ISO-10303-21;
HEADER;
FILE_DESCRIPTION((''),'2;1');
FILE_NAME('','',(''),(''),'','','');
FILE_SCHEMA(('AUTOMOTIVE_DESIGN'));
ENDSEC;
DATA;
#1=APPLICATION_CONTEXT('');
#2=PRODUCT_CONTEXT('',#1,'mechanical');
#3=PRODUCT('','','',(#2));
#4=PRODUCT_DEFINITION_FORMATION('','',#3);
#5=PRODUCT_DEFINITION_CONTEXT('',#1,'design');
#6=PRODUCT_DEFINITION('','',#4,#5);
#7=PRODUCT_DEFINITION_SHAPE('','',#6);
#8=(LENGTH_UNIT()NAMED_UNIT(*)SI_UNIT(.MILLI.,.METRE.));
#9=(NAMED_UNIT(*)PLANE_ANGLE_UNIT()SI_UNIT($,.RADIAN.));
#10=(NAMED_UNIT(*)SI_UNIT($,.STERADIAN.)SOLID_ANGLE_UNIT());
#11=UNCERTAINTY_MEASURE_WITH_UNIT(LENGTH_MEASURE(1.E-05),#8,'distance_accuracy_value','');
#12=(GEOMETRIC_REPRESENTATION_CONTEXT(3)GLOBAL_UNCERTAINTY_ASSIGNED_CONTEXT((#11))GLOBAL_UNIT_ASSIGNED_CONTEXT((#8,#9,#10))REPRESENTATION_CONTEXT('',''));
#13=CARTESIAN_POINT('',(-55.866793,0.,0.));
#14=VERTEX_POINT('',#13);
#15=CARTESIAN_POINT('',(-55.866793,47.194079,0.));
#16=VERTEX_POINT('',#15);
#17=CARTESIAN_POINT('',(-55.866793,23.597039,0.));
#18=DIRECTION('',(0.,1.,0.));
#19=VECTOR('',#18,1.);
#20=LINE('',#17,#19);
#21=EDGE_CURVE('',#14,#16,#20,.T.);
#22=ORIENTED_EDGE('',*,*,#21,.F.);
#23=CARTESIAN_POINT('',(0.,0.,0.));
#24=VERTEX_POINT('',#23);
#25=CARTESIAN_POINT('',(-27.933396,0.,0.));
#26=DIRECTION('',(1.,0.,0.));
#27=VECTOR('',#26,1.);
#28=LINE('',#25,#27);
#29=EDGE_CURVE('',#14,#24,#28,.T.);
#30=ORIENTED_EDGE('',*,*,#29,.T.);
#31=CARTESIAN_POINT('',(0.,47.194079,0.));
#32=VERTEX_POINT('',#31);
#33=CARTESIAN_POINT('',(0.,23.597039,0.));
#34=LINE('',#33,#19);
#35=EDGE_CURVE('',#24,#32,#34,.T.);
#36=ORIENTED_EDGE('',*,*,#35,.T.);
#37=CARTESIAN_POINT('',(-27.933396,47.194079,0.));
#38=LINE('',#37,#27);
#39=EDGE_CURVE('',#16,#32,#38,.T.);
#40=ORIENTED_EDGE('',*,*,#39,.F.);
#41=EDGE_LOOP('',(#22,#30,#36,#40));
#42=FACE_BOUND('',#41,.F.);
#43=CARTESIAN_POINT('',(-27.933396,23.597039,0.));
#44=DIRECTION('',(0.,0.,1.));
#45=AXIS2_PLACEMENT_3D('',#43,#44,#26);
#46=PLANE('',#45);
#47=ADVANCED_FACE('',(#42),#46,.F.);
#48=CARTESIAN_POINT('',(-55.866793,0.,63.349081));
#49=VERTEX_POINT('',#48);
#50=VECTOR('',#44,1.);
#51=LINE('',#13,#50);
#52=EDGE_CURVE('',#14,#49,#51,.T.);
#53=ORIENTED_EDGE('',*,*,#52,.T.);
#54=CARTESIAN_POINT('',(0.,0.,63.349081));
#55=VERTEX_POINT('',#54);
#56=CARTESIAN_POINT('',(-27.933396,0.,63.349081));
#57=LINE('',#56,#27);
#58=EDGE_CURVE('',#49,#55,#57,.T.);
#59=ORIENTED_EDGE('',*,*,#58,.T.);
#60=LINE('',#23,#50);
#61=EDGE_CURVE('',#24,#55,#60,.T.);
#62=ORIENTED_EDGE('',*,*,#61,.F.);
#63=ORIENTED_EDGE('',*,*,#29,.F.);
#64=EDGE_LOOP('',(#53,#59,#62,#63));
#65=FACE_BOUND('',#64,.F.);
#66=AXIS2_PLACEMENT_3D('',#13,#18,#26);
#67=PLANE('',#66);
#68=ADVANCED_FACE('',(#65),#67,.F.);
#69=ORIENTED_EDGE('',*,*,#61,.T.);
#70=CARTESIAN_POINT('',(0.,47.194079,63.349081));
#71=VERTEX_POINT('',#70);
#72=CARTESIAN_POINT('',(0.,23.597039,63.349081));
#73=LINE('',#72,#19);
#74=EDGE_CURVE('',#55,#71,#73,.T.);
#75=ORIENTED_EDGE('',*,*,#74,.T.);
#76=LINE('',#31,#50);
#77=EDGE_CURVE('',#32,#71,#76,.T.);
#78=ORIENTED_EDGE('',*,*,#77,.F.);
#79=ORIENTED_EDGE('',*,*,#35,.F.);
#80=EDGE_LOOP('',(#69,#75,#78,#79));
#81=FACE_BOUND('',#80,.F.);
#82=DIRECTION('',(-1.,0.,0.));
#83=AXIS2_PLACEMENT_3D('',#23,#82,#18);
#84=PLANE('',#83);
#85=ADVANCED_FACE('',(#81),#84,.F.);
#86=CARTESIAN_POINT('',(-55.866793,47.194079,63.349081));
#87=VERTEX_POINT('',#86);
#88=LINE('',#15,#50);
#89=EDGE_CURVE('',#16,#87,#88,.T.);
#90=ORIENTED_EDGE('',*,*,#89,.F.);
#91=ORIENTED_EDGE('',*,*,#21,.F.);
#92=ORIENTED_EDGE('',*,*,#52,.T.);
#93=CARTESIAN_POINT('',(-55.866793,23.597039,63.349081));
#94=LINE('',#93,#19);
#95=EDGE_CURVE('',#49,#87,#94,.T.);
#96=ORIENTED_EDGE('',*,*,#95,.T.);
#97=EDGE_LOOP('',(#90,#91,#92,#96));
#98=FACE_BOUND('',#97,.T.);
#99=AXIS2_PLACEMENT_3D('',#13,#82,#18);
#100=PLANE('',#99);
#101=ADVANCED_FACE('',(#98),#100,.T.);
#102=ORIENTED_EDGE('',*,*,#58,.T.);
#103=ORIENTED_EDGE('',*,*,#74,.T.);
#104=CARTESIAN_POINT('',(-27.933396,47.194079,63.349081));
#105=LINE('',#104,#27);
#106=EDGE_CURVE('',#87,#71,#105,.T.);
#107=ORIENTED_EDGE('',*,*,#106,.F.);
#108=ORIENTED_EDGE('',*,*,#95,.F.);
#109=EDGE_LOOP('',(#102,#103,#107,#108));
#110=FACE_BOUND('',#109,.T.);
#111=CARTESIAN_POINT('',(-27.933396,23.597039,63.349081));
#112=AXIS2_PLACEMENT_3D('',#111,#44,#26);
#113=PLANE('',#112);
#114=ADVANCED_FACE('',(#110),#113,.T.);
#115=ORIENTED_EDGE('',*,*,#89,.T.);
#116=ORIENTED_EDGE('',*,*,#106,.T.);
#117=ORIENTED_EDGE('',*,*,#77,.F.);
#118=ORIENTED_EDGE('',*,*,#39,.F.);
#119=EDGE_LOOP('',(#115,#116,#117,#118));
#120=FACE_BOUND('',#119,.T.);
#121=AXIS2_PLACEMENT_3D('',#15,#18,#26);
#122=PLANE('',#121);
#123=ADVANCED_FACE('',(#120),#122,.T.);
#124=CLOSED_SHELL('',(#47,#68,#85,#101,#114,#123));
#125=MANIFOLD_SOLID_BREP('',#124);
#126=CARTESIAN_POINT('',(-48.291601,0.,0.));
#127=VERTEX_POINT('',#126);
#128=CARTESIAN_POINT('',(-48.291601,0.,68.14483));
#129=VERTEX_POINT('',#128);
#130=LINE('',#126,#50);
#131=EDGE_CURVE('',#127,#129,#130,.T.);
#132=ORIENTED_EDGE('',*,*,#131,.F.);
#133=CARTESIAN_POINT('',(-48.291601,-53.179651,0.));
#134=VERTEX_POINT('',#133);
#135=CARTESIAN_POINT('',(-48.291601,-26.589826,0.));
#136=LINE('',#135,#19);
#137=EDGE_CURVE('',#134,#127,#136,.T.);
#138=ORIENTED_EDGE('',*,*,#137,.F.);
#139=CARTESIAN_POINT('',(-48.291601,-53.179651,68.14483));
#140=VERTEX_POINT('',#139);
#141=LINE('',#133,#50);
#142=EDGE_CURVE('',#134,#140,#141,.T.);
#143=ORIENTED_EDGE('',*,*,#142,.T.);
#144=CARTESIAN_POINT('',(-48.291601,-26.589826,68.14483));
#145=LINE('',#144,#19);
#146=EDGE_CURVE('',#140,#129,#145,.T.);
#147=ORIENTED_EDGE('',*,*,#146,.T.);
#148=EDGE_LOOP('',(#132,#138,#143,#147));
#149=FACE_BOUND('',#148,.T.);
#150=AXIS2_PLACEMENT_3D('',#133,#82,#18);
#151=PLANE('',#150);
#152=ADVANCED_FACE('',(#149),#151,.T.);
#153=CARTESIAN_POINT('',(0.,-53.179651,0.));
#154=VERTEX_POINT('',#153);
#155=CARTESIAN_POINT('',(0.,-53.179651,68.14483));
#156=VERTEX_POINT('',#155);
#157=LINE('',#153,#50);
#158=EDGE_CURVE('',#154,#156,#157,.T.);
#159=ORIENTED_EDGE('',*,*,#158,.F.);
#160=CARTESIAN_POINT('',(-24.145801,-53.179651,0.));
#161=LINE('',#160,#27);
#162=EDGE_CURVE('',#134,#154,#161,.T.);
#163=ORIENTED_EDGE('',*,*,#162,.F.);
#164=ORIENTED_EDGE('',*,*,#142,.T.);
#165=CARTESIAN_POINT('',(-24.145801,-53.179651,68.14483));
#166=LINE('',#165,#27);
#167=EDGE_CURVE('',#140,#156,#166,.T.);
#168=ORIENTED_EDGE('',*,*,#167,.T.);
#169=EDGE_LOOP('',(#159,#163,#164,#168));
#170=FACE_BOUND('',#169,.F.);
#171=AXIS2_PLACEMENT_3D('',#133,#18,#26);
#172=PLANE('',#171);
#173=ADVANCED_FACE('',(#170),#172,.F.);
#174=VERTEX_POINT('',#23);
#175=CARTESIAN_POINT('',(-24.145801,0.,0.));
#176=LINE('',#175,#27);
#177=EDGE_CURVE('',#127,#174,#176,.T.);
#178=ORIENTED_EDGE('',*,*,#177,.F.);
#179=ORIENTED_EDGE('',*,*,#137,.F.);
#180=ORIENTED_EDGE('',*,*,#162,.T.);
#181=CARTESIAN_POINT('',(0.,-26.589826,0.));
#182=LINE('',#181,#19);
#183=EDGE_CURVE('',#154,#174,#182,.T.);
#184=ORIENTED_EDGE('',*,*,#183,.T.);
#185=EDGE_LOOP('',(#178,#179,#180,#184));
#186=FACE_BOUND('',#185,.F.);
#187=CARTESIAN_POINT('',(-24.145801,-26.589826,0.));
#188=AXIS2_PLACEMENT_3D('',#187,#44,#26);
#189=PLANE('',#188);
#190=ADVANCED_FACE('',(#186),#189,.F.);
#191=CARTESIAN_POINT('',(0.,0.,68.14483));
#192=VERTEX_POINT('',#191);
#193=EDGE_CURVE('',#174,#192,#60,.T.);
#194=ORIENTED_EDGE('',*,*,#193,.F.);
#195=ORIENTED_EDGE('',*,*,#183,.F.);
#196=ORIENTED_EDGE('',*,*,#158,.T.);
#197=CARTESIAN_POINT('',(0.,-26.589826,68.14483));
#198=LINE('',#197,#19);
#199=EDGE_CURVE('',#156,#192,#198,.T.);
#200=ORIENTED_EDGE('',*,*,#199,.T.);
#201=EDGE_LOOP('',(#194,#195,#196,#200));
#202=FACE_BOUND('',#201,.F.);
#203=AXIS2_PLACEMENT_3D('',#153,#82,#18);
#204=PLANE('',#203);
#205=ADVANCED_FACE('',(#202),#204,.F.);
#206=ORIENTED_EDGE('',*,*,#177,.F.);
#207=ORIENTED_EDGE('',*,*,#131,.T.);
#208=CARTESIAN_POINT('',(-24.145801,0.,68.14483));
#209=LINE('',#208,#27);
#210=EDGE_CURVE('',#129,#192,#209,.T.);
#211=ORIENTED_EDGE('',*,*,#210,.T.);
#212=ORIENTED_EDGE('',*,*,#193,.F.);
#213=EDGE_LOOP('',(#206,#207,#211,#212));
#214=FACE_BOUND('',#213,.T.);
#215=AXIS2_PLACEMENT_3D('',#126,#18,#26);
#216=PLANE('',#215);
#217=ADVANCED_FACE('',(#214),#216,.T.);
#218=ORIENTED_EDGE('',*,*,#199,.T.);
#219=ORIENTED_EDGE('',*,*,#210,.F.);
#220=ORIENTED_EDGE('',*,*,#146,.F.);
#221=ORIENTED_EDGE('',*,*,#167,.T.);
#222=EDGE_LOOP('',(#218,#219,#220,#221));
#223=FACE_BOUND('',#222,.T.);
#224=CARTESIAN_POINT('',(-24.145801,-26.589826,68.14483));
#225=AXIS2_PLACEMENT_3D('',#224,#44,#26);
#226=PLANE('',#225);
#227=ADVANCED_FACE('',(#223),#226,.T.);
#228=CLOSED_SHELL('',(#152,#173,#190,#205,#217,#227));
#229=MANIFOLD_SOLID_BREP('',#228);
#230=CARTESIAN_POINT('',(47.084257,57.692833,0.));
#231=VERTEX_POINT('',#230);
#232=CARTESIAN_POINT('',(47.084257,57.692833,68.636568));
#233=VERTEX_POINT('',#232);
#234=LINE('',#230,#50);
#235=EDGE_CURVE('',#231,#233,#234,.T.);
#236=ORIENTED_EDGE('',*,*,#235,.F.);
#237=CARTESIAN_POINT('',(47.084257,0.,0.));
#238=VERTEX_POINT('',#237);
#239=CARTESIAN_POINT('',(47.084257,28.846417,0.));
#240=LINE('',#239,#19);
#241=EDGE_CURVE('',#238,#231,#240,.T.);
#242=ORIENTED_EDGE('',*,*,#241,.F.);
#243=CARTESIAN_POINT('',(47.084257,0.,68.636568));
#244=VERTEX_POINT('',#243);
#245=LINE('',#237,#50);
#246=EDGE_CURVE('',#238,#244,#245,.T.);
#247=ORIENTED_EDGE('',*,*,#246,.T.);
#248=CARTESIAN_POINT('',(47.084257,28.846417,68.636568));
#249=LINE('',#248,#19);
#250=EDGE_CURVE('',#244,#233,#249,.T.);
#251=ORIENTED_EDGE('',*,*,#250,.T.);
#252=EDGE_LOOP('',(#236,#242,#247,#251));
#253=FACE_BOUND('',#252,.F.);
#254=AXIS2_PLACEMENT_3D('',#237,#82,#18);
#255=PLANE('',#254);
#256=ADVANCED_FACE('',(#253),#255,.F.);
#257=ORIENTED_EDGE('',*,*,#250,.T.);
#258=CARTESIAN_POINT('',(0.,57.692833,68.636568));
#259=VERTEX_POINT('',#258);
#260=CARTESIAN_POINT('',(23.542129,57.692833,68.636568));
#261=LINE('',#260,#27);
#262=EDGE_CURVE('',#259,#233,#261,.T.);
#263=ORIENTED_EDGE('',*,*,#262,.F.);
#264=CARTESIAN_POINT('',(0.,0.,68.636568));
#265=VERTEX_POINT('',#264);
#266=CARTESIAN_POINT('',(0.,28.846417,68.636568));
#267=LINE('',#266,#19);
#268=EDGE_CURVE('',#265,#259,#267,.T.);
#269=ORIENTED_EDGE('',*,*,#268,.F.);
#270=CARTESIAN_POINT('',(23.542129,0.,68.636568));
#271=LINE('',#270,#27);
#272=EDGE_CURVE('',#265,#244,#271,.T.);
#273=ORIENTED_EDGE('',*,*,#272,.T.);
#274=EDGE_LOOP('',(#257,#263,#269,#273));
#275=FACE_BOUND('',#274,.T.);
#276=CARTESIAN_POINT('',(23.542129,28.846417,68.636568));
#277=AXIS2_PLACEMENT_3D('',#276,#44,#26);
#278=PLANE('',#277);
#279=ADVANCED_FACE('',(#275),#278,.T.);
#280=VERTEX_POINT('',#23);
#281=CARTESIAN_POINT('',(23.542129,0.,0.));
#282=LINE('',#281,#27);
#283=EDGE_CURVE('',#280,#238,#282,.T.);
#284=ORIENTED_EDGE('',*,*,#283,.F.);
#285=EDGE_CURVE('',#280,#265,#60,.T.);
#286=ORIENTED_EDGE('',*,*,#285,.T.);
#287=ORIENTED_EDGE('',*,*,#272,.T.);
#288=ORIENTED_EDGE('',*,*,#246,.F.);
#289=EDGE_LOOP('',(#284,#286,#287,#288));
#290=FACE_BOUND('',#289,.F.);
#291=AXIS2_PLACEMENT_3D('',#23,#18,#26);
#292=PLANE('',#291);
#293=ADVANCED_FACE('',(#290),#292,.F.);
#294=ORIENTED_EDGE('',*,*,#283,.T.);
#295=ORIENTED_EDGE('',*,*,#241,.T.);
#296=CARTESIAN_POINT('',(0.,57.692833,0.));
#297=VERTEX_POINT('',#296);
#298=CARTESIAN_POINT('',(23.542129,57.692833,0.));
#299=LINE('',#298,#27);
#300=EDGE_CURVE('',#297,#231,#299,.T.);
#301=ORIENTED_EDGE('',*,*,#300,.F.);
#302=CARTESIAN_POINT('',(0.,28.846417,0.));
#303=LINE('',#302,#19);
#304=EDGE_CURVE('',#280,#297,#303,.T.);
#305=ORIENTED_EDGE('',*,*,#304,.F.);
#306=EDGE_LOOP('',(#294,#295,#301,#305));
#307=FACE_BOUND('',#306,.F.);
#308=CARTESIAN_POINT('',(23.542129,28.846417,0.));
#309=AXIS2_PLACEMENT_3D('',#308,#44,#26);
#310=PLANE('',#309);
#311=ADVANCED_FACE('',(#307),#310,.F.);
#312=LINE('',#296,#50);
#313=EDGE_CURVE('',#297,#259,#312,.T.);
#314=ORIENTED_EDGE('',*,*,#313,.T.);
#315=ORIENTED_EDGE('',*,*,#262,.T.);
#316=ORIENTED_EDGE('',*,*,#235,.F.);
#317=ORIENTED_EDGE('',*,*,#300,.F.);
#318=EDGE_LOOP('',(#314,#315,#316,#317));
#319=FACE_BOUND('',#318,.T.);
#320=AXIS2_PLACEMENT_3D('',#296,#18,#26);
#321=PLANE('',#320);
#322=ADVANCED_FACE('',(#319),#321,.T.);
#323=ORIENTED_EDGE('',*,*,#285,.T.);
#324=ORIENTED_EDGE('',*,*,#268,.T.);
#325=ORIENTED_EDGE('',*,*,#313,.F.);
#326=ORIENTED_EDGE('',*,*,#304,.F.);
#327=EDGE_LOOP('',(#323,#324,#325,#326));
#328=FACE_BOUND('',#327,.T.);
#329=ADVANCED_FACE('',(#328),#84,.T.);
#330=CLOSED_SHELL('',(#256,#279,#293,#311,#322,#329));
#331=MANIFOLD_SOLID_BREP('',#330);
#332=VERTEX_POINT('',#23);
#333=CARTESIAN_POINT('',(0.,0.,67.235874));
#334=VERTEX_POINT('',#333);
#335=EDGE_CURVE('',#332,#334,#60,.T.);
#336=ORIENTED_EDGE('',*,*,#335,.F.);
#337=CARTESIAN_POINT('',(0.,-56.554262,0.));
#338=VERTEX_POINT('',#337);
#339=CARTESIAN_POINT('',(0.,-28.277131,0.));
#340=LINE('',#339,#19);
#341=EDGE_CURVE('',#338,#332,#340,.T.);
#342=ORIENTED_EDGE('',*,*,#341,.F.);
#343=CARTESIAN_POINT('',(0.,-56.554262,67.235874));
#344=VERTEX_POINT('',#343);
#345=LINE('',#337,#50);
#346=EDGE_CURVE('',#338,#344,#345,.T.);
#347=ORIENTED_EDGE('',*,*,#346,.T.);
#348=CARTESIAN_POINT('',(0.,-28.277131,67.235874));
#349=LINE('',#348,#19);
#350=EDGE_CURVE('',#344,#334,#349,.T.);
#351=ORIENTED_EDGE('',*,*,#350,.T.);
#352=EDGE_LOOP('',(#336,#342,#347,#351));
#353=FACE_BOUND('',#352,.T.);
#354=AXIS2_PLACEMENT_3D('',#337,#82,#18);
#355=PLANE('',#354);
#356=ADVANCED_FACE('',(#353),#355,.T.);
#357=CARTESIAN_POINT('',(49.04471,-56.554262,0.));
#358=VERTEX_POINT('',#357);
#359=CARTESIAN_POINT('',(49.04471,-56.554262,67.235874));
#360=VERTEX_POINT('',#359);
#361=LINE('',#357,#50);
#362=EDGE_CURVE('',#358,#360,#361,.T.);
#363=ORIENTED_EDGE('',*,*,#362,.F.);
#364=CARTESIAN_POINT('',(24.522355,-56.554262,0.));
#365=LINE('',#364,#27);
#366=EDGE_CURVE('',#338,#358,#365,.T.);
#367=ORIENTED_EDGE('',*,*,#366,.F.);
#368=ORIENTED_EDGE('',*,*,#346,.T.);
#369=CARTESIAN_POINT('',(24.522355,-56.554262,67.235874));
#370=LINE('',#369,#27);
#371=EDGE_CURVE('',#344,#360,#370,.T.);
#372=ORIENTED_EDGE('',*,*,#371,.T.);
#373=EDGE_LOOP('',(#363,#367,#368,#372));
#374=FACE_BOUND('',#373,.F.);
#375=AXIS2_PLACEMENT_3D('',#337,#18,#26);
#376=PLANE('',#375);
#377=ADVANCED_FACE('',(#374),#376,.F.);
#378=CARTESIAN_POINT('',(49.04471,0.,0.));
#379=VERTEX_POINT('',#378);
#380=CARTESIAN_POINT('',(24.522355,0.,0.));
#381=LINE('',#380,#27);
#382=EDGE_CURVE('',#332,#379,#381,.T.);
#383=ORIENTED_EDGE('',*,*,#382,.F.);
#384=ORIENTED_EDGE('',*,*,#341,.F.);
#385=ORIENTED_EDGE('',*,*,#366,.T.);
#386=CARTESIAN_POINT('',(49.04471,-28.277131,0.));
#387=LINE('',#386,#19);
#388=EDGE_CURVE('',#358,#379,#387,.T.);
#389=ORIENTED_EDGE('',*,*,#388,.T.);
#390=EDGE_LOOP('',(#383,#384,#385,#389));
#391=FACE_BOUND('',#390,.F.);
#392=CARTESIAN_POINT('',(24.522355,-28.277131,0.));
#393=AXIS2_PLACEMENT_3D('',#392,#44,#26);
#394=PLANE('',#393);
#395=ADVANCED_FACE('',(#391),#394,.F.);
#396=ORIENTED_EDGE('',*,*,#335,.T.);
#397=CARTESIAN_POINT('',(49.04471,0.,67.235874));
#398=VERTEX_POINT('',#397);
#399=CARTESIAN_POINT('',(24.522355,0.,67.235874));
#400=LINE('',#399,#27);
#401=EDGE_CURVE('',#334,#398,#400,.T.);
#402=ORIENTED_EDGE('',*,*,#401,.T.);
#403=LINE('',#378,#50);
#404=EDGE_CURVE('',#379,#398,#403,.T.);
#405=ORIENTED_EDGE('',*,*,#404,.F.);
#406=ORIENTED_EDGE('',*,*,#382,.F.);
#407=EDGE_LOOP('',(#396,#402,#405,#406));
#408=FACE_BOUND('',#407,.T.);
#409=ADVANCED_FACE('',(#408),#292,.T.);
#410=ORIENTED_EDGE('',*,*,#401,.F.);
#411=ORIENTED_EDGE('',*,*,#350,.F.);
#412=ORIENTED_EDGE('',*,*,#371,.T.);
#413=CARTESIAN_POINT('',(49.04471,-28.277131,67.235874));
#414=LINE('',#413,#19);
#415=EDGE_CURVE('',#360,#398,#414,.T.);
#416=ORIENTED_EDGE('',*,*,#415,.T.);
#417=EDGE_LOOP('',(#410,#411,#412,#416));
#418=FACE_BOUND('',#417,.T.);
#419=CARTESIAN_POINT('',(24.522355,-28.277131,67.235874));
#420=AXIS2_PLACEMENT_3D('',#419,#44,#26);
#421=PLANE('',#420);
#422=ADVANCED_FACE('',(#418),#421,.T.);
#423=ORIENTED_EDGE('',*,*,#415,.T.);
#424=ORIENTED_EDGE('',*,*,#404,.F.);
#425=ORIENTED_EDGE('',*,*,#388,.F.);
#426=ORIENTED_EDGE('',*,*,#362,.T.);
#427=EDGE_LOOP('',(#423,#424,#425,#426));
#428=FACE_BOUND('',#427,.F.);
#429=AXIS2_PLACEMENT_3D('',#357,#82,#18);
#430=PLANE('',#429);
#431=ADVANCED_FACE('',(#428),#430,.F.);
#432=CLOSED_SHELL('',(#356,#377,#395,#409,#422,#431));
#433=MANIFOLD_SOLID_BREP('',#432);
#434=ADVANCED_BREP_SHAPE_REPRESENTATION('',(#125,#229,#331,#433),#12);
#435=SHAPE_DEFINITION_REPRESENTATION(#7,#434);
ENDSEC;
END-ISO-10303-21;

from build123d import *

# Parameters (mm, degrees)
F2_W     = 55.866792798
F2_H     = 47.1940785646
F3_DEPTH = 63.3490812033
F4_W     = 49.0447096527
F4_H     = 56.554261595
F5_DEPTH = 67.2358740121
F6_W     = 47.0842570066
F6_H     = 57.6928332448
F7_DEPTH = 68.6365682632
F8_W     = 48.2916012406
F8_H     = 53.1796514988
F9_DEPTH = 68.1448299438


# Not quite as in the source:
# - the program builds the solid bodies; features that only make, move or delete a surface that nothing else refers to are left out


with BuildPart() as f3:
    # F2 (on Top) → F3 (new body)
    with BuildSketch(Plane.XY):
        with Locations((-27.933396399, 23.5970392823)):
            Rectangle(F2_W, F2_H)
    extrude(amount=F3_DEPTH)


with BuildPart() as f5:
    # F4 (on Top) → F5 (new body)
    with BuildSketch(Plane.XY):
        with Locations((24.5223548263, -28.2771307975)):
            Rectangle(F4_W, F4_H)
    extrude(amount=F5_DEPTH)


with BuildPart() as f7:
    # F6 (on Top) → F7 (new body)
    with BuildSketch(Plane.XY):
        with Locations((23.5421285033, 28.8464166224)):
            Rectangle(F6_W, F6_H)
    extrude(amount=F7_DEPTH)


with BuildPart() as f9:
    # F8 (on Top) → F9 (new body)
    with BuildSketch(Plane.XY):
        with Locations((-24.1458006203, -26.5898257494)):
            Rectangle(F8_W, F8_H)
    extrude(amount=F9_DEPTH)


solid = Compound([f3.part, f5.part, f7.part, f9.part])
